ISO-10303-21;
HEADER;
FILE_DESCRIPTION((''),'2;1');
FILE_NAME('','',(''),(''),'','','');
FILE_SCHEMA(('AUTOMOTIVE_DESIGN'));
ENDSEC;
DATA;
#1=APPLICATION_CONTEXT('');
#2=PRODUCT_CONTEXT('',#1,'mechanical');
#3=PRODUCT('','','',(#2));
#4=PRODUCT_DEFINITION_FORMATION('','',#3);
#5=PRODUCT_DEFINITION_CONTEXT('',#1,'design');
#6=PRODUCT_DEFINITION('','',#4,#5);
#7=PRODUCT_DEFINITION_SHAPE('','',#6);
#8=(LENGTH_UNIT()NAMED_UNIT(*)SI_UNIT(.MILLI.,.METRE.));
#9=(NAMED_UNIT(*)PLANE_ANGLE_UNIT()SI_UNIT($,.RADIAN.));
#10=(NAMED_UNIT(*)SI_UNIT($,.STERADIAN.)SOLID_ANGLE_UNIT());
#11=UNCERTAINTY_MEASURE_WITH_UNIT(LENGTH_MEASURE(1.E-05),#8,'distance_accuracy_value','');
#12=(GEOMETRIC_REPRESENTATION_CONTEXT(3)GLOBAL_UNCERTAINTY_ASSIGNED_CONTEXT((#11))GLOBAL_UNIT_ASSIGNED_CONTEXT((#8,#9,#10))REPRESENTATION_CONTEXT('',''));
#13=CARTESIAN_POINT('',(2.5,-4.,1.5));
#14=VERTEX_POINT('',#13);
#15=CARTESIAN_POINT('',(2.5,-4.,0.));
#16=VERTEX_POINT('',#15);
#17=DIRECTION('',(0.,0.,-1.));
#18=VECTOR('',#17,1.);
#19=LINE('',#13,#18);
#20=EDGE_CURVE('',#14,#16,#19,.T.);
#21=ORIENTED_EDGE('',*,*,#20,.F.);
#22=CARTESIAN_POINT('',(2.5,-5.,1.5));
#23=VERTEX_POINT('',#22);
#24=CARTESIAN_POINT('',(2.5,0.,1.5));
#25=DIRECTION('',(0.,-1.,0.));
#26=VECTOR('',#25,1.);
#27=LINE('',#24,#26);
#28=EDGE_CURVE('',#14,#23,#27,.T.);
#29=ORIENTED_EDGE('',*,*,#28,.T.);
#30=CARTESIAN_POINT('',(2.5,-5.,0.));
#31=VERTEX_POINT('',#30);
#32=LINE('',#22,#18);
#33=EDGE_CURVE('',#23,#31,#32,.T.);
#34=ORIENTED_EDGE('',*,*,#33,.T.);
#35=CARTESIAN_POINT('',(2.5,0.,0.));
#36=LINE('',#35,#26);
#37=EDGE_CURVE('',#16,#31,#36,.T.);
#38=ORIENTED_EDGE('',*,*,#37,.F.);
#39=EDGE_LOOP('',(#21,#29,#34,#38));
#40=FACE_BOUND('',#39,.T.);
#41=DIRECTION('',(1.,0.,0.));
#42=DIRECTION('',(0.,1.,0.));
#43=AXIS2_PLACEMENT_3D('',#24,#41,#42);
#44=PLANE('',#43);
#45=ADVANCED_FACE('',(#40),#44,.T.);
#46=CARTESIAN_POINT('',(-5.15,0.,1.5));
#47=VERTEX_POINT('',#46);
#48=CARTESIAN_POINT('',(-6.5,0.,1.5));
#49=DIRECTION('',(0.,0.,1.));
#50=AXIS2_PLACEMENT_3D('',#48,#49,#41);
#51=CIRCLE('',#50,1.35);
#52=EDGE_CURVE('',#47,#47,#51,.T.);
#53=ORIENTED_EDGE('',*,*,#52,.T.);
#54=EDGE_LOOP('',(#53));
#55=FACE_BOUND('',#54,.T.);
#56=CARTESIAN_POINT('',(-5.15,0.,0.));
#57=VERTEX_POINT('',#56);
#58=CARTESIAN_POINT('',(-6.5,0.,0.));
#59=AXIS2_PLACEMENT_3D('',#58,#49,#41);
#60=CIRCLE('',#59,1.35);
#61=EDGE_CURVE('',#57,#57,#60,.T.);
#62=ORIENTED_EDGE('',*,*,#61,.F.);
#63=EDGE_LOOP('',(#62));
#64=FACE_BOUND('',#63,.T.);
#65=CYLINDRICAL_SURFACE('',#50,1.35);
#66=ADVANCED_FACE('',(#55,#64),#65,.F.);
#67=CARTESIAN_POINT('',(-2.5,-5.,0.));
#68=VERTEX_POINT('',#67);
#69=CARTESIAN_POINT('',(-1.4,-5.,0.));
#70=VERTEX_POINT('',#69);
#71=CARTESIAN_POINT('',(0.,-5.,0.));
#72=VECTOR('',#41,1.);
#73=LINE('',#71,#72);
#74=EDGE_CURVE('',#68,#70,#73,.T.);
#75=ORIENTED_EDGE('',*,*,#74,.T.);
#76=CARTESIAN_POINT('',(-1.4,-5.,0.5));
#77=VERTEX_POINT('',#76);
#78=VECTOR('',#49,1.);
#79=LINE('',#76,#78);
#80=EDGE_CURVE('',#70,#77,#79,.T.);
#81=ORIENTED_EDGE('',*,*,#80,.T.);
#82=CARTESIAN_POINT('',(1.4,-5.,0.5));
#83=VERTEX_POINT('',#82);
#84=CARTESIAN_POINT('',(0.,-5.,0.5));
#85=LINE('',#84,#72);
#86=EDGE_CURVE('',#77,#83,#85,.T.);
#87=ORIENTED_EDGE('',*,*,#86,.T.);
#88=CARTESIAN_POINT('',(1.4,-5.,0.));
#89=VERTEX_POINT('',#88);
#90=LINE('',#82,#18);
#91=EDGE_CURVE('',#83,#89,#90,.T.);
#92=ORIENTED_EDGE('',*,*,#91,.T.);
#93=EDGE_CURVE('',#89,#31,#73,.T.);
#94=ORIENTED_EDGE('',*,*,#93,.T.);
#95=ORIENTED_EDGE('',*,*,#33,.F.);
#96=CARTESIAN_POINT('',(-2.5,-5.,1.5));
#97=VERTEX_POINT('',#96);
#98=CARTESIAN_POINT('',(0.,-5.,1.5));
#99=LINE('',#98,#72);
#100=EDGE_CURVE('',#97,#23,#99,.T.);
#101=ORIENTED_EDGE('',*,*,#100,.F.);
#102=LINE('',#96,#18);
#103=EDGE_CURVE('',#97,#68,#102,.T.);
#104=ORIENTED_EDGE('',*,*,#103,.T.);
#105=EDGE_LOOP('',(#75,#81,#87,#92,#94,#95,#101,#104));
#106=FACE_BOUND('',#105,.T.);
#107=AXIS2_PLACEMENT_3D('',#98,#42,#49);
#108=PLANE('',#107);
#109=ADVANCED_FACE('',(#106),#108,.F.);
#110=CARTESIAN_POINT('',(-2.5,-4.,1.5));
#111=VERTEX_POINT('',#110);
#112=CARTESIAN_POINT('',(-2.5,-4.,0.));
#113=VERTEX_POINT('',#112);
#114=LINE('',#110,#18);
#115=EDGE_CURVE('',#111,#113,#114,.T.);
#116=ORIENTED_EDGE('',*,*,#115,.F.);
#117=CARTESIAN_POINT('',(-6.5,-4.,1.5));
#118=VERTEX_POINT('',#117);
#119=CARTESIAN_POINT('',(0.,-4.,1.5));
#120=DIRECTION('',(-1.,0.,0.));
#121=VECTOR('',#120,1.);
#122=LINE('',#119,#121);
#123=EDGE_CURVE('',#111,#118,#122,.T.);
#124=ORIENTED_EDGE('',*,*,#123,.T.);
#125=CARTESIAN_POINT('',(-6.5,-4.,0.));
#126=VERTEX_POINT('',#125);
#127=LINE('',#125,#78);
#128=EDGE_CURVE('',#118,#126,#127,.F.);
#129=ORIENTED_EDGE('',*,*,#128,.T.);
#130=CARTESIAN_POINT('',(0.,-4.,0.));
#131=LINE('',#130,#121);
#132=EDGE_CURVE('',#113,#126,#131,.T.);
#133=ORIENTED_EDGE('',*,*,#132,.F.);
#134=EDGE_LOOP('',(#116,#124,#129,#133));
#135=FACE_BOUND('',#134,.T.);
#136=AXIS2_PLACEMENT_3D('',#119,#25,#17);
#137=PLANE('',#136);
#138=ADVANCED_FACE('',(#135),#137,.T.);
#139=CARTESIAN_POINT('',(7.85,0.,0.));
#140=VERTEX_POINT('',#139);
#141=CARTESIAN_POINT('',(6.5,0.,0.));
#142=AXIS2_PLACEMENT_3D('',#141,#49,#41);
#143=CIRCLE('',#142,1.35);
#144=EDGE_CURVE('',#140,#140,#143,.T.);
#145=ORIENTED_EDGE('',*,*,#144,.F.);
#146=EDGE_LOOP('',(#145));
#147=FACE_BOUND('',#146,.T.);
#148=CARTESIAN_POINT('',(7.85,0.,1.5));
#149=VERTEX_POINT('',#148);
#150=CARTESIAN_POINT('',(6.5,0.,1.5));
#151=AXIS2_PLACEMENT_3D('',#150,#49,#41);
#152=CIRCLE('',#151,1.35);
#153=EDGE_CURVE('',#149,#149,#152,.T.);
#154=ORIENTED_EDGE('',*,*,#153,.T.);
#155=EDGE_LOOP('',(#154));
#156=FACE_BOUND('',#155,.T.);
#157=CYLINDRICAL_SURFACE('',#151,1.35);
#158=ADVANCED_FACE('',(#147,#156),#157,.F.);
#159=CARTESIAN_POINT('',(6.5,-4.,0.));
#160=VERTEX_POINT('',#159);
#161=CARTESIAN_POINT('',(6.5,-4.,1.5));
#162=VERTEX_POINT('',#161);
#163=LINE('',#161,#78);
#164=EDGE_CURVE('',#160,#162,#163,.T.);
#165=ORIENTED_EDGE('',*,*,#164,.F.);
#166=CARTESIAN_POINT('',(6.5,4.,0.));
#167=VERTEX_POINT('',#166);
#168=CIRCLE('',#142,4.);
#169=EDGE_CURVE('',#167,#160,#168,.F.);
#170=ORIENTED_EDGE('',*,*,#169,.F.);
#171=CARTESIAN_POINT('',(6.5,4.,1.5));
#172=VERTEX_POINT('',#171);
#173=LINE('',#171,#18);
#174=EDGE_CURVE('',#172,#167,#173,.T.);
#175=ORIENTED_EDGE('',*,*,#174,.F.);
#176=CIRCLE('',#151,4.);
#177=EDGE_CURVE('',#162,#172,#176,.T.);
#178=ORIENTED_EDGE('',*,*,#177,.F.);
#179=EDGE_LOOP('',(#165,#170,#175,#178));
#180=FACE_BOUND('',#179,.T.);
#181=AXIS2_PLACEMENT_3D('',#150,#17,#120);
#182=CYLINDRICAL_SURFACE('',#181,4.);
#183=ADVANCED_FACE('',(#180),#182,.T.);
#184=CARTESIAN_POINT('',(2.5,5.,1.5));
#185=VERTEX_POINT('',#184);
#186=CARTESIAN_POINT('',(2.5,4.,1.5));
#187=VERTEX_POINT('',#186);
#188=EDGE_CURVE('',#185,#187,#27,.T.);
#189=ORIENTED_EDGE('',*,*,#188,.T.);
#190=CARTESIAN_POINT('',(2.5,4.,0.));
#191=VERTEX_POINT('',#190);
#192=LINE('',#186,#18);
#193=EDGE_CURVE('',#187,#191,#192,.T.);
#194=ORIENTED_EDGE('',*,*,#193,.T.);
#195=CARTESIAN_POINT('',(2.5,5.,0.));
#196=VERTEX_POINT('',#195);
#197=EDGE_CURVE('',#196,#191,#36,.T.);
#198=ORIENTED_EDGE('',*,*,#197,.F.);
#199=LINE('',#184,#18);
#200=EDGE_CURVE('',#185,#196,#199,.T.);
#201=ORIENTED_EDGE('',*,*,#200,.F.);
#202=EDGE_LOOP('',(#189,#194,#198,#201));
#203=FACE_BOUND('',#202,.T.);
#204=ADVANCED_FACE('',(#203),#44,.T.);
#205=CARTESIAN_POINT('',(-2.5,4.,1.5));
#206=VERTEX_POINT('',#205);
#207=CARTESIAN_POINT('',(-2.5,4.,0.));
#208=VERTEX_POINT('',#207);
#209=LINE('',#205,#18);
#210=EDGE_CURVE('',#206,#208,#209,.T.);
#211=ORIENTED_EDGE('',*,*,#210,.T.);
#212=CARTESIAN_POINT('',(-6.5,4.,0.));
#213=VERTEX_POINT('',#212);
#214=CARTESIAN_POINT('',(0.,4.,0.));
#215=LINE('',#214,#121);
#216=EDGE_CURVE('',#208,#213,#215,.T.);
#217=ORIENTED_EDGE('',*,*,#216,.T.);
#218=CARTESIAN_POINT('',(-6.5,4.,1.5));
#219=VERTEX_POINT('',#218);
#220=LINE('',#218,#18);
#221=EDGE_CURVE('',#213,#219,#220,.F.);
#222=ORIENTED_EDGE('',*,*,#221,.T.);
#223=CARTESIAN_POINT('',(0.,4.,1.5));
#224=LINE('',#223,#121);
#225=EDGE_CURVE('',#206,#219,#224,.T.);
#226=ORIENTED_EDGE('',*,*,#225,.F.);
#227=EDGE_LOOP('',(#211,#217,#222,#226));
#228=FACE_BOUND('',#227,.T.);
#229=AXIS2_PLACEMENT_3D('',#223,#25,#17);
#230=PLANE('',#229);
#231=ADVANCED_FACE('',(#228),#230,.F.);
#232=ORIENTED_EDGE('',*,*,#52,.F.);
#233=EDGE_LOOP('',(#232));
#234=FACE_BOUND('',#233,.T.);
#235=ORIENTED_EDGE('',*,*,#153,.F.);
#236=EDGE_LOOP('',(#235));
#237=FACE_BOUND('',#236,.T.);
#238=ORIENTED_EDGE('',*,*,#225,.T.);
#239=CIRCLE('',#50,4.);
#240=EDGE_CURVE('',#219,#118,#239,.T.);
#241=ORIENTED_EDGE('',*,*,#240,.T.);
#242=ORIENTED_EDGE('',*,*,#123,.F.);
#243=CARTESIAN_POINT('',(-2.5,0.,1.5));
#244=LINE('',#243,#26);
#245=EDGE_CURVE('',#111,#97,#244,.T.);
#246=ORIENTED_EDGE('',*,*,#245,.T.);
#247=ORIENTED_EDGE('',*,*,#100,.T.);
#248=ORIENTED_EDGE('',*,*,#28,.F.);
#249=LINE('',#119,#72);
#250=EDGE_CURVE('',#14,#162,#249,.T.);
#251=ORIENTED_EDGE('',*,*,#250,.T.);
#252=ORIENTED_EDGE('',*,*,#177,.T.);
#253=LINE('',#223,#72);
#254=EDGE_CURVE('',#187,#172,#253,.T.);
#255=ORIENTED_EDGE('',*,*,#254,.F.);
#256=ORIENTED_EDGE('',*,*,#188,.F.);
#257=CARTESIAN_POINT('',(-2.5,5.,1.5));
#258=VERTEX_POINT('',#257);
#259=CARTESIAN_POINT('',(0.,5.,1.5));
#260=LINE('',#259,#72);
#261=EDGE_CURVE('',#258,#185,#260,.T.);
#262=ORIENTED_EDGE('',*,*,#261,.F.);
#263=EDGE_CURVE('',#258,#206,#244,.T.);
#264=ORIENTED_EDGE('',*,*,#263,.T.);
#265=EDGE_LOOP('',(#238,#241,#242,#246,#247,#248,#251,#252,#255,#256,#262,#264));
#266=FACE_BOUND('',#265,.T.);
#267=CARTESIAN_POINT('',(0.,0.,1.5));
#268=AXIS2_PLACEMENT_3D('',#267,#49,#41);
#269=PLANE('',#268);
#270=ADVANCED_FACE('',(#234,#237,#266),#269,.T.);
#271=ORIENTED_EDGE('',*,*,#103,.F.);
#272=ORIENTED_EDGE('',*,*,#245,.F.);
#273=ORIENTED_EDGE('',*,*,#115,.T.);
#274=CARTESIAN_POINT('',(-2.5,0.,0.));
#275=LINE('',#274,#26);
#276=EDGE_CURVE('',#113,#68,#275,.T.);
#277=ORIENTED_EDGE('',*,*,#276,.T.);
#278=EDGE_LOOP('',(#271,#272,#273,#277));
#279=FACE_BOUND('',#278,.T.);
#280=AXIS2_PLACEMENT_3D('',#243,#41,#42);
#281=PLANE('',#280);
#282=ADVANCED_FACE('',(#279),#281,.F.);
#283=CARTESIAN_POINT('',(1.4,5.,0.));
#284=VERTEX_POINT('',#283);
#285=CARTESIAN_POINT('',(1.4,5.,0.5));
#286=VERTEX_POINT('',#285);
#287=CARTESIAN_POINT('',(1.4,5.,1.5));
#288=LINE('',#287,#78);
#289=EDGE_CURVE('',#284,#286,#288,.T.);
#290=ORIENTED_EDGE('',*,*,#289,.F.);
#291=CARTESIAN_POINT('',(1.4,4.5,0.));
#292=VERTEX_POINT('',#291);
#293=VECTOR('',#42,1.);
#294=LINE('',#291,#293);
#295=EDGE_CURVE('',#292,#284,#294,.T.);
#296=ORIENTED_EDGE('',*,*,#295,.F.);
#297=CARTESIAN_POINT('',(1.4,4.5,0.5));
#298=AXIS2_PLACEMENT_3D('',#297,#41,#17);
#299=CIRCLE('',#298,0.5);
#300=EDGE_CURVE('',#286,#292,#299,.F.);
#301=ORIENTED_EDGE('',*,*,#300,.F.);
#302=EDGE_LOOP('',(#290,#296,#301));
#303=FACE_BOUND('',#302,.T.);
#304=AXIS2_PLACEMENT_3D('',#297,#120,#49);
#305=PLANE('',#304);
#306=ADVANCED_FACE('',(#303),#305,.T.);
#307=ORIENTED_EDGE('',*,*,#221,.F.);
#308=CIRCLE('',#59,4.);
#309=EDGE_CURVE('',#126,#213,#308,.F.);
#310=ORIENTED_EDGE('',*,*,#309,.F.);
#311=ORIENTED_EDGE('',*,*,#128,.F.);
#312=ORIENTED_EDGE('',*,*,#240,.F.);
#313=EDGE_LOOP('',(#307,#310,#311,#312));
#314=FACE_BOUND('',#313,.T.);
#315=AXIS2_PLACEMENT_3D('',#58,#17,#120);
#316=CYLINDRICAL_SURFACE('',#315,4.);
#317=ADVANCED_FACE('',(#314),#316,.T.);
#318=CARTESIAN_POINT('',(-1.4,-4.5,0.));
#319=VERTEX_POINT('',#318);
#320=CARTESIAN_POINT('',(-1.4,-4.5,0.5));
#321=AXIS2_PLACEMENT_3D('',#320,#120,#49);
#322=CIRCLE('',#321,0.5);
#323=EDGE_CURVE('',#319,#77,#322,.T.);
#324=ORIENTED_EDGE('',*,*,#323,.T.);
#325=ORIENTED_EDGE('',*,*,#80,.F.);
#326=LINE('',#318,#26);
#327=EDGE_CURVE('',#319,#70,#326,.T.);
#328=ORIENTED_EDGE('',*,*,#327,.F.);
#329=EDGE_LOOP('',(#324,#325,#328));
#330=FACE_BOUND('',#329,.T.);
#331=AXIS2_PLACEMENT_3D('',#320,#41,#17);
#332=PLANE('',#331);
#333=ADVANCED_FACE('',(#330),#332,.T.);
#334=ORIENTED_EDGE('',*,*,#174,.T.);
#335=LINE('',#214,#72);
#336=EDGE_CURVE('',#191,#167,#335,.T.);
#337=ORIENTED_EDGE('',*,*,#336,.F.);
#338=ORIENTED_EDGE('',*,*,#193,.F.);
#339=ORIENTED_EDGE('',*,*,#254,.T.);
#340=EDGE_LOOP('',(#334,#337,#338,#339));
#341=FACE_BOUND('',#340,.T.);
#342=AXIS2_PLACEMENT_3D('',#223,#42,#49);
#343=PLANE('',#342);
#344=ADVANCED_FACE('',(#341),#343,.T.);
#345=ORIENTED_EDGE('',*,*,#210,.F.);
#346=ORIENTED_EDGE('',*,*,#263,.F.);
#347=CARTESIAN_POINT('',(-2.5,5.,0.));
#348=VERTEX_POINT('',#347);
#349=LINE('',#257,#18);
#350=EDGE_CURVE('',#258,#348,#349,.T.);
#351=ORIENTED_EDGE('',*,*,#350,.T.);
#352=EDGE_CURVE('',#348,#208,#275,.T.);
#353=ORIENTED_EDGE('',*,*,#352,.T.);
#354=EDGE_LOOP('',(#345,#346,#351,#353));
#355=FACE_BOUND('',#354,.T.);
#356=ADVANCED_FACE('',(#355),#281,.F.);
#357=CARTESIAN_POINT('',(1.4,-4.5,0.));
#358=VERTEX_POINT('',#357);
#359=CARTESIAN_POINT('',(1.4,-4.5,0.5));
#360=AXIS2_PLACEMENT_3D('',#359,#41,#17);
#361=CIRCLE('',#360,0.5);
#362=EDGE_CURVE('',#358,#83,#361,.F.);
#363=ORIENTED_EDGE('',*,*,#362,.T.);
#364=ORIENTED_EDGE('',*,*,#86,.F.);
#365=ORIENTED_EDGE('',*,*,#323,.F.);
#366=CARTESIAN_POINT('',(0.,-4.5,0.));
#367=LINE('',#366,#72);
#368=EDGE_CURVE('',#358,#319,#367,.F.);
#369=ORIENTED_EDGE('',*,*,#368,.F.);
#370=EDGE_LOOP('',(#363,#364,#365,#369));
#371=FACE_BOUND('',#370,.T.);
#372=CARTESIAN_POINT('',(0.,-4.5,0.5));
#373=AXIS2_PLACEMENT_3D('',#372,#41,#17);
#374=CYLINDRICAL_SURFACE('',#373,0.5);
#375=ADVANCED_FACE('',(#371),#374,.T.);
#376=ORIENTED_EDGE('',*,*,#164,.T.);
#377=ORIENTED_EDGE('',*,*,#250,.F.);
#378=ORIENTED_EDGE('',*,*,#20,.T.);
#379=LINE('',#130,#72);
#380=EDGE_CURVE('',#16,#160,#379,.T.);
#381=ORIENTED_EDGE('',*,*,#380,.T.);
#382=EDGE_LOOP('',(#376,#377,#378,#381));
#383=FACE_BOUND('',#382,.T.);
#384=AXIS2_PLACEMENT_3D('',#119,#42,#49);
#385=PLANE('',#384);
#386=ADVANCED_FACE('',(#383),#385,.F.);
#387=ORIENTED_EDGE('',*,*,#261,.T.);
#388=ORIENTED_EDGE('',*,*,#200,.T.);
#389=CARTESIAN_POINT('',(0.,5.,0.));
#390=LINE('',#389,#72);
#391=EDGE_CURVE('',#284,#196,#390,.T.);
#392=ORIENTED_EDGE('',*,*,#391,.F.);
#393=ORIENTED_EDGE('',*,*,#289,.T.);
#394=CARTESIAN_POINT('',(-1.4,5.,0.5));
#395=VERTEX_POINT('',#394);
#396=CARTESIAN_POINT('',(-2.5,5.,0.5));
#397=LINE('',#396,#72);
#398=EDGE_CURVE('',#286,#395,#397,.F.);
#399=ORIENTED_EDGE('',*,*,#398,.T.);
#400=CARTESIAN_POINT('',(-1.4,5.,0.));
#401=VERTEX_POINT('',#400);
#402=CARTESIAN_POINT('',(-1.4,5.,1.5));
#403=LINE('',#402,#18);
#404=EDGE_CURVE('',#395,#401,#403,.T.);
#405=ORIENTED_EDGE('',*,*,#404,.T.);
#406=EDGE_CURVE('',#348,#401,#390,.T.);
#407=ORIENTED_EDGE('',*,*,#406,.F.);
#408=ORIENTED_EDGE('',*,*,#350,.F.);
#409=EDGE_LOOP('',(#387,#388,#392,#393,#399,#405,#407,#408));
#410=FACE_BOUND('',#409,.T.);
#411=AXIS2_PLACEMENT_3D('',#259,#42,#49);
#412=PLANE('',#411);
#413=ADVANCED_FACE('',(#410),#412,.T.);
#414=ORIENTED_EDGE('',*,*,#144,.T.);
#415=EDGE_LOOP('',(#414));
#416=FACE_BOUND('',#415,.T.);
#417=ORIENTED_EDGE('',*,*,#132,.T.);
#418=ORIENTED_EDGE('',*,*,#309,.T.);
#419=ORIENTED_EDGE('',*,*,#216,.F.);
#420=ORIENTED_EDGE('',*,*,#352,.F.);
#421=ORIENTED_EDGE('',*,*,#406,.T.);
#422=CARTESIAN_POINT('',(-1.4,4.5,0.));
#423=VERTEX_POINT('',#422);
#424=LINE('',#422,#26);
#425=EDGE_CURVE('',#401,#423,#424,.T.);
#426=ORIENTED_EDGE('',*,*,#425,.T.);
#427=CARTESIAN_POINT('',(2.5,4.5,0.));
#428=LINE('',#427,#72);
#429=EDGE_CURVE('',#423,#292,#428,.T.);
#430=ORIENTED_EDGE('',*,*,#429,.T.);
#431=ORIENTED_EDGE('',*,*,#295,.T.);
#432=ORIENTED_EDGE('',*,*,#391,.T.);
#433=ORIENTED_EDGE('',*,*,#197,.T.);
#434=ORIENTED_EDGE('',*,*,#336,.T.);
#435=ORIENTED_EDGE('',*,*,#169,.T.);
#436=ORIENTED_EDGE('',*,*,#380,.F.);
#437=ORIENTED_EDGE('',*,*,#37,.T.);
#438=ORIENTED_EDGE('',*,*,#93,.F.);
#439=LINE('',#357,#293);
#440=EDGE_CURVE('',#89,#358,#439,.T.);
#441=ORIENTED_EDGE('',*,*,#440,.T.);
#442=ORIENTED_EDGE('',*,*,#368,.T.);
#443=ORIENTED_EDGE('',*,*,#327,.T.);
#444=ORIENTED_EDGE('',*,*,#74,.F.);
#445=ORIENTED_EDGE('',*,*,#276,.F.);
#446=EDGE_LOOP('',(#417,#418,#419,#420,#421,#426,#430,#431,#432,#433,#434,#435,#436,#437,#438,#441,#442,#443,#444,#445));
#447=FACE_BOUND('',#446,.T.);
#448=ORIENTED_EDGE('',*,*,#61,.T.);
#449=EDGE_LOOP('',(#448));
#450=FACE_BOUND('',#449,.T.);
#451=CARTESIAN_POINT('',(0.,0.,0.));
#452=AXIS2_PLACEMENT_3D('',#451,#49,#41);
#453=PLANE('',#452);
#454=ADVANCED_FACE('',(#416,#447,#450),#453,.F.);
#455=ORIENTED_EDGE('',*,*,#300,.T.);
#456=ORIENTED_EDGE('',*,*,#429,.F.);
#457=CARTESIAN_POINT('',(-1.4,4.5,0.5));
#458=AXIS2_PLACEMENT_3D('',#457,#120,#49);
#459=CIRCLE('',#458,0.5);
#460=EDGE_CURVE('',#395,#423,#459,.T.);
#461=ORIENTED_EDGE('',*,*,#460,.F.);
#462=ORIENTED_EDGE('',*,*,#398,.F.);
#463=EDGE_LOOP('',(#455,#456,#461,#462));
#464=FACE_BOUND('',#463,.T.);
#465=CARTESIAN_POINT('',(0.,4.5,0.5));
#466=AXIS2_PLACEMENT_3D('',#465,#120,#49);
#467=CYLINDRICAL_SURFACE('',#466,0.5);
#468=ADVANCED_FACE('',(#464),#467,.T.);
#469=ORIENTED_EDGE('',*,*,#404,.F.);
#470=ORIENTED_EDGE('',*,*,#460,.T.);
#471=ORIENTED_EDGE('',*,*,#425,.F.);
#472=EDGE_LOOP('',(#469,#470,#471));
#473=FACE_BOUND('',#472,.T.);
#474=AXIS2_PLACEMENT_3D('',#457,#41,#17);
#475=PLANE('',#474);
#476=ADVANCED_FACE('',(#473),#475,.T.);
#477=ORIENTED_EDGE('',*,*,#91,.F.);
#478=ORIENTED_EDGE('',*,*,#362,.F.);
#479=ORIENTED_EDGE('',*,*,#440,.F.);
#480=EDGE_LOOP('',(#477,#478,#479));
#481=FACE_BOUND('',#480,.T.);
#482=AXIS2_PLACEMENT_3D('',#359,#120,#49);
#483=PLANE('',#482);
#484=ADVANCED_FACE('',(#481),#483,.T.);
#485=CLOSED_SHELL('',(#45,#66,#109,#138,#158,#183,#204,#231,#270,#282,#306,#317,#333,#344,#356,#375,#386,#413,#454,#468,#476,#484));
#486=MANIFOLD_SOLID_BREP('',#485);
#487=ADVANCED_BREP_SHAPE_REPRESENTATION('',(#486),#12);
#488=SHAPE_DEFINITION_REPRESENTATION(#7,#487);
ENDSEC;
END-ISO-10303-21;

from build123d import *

# Parameters (mm, degrees)
SKETCH_1_W           = 8
SKETCH_1_H           = 8
SKETCH_1_W_2         = 5
SKETCH_1_H_2         = 10
EXTRUDE_709_DEPTH    = 1.5
HOLE_WIZARD_M2_5_1_D = 2.7
FILLET_1_RADIUS      = 4
FILLET_1_LENGTH      = 1.5
FILLET_2_RADIUS      = 4
FILLET_2_LENGTH      = 1.5
FILLET_START         = -1.4
FILLET_3_DEPTH       = 2.8


with BuildPart() as part:
    # 草图1 → Extrude 709 (new body)
    with BuildSketch(Plane.XY):
        with Locations((6.5, 0)):
            Rectangle(SKETCH_1_W, SKETCH_1_H)
        Rectangle(SKETCH_1_W_2, SKETCH_1_H_2)
        with Locations((-6.5, 0)):
            Rectangle(SKETCH_1_W, SKETCH_1_H)
    extrude(amount=EXTRUDE_709_DEPTH)

    # M2.5 间隙孔1 (through all)
    with Locations(Plane.XY.offset(1.5)):
        with Locations((6.5, 0)):
            hole_wizard_m2_5_1 = Hole(HOLE_WIZARD_M2_5_1_D / 2)

    # 镜向2: M2.5 间隙孔1 across plane
    add(hole_wizard_m2_5_1.mirror(Plane(origin=(0, 0, 0), x_dir=(0, 0, 1), z_dir=(1, 0, 0))), mode=Mode.SUBTRACT)

    # 圆角1: full round fillet: the end face becomes a half cylinder, R = half its width
    fillet_1_face = Plane((10.5, 0, 0.75), x_dir=(0, 0, -1), z_dir=(1, 0, 0))  # on the end face: x along it, z out of the body
    fillet_1_slab = fillet_1_face.offset(-FILLET_1_RADIUS / 2) * Box(FILLET_1_LENGTH, 2 * FILLET_1_RADIUS, FILLET_1_RADIUS, mode=Mode.PRIVATE)  # the body's end, R deep
    fillet_1_round = Plane((6.5, 0, 0.75), x_dir=(1, 0, 0), z_dir=(0, 0, -1)) * Cylinder(FILLET_1_RADIUS, FILLET_1_LENGTH, mode=Mode.PRIVATE)  # its axis R under the face
    add(fillet_1_slab - fillet_1_round, mode=Mode.SUBTRACT)

    # 圆角2: full round fillet: the end face becomes a half cylinder, R = half its width
    fillet_2_face = Plane((-10.5, 0, 0.75), x_dir=(0, 0, 1), z_dir=(-1, 0, 0))  # on the end face: x along it, z out of the body
    fillet_2_slab = fillet_2_face.offset(-FILLET_2_RADIUS / 2) * Box(FILLET_2_LENGTH, 2 * FILLET_2_RADIUS, FILLET_2_RADIUS, mode=Mode.PRIVATE)  # the body's end, R deep
    fillet_2_round = Plane((-6.5, 0, 0.75), x_dir=(-1, 0, 0), z_dir=(0, 0, 1)) * Cylinder(FILLET_2_RADIUS, FILLET_2_LENGTH, mode=Mode.PRIVATE)  # its axis R under the face
    add(fillet_2_slab - fillet_2_round, mode=Mode.SUBTRACT)

    # 圆角3: read off the stored shape, not the designer's step
    # 圆角3 outline → 圆角3 (cut)
    with BuildSketch(Plane.YZ.offset(FILLET_START)):
        with BuildLine():
            Line((5, 0), (5, 0.5))
            ThreePointArc((5, 0.5), (4.853553391, 0.146446609), (4.5, 0))
            Line((4.5, 0), (5, 0))
        make_face()
        with BuildLine():
            Line((-5, 0), (-4.5, 0))
            ThreePointArc((-4.5, 0), (-4.853553391, 0.146446609), (-5, 0.5))
            Line((-5, 0.5), (-5, 0))
        make_face()
    extrude(amount=FILLET_3_DEPTH, mode=Mode.SUBTRACT)


solid = part.part
